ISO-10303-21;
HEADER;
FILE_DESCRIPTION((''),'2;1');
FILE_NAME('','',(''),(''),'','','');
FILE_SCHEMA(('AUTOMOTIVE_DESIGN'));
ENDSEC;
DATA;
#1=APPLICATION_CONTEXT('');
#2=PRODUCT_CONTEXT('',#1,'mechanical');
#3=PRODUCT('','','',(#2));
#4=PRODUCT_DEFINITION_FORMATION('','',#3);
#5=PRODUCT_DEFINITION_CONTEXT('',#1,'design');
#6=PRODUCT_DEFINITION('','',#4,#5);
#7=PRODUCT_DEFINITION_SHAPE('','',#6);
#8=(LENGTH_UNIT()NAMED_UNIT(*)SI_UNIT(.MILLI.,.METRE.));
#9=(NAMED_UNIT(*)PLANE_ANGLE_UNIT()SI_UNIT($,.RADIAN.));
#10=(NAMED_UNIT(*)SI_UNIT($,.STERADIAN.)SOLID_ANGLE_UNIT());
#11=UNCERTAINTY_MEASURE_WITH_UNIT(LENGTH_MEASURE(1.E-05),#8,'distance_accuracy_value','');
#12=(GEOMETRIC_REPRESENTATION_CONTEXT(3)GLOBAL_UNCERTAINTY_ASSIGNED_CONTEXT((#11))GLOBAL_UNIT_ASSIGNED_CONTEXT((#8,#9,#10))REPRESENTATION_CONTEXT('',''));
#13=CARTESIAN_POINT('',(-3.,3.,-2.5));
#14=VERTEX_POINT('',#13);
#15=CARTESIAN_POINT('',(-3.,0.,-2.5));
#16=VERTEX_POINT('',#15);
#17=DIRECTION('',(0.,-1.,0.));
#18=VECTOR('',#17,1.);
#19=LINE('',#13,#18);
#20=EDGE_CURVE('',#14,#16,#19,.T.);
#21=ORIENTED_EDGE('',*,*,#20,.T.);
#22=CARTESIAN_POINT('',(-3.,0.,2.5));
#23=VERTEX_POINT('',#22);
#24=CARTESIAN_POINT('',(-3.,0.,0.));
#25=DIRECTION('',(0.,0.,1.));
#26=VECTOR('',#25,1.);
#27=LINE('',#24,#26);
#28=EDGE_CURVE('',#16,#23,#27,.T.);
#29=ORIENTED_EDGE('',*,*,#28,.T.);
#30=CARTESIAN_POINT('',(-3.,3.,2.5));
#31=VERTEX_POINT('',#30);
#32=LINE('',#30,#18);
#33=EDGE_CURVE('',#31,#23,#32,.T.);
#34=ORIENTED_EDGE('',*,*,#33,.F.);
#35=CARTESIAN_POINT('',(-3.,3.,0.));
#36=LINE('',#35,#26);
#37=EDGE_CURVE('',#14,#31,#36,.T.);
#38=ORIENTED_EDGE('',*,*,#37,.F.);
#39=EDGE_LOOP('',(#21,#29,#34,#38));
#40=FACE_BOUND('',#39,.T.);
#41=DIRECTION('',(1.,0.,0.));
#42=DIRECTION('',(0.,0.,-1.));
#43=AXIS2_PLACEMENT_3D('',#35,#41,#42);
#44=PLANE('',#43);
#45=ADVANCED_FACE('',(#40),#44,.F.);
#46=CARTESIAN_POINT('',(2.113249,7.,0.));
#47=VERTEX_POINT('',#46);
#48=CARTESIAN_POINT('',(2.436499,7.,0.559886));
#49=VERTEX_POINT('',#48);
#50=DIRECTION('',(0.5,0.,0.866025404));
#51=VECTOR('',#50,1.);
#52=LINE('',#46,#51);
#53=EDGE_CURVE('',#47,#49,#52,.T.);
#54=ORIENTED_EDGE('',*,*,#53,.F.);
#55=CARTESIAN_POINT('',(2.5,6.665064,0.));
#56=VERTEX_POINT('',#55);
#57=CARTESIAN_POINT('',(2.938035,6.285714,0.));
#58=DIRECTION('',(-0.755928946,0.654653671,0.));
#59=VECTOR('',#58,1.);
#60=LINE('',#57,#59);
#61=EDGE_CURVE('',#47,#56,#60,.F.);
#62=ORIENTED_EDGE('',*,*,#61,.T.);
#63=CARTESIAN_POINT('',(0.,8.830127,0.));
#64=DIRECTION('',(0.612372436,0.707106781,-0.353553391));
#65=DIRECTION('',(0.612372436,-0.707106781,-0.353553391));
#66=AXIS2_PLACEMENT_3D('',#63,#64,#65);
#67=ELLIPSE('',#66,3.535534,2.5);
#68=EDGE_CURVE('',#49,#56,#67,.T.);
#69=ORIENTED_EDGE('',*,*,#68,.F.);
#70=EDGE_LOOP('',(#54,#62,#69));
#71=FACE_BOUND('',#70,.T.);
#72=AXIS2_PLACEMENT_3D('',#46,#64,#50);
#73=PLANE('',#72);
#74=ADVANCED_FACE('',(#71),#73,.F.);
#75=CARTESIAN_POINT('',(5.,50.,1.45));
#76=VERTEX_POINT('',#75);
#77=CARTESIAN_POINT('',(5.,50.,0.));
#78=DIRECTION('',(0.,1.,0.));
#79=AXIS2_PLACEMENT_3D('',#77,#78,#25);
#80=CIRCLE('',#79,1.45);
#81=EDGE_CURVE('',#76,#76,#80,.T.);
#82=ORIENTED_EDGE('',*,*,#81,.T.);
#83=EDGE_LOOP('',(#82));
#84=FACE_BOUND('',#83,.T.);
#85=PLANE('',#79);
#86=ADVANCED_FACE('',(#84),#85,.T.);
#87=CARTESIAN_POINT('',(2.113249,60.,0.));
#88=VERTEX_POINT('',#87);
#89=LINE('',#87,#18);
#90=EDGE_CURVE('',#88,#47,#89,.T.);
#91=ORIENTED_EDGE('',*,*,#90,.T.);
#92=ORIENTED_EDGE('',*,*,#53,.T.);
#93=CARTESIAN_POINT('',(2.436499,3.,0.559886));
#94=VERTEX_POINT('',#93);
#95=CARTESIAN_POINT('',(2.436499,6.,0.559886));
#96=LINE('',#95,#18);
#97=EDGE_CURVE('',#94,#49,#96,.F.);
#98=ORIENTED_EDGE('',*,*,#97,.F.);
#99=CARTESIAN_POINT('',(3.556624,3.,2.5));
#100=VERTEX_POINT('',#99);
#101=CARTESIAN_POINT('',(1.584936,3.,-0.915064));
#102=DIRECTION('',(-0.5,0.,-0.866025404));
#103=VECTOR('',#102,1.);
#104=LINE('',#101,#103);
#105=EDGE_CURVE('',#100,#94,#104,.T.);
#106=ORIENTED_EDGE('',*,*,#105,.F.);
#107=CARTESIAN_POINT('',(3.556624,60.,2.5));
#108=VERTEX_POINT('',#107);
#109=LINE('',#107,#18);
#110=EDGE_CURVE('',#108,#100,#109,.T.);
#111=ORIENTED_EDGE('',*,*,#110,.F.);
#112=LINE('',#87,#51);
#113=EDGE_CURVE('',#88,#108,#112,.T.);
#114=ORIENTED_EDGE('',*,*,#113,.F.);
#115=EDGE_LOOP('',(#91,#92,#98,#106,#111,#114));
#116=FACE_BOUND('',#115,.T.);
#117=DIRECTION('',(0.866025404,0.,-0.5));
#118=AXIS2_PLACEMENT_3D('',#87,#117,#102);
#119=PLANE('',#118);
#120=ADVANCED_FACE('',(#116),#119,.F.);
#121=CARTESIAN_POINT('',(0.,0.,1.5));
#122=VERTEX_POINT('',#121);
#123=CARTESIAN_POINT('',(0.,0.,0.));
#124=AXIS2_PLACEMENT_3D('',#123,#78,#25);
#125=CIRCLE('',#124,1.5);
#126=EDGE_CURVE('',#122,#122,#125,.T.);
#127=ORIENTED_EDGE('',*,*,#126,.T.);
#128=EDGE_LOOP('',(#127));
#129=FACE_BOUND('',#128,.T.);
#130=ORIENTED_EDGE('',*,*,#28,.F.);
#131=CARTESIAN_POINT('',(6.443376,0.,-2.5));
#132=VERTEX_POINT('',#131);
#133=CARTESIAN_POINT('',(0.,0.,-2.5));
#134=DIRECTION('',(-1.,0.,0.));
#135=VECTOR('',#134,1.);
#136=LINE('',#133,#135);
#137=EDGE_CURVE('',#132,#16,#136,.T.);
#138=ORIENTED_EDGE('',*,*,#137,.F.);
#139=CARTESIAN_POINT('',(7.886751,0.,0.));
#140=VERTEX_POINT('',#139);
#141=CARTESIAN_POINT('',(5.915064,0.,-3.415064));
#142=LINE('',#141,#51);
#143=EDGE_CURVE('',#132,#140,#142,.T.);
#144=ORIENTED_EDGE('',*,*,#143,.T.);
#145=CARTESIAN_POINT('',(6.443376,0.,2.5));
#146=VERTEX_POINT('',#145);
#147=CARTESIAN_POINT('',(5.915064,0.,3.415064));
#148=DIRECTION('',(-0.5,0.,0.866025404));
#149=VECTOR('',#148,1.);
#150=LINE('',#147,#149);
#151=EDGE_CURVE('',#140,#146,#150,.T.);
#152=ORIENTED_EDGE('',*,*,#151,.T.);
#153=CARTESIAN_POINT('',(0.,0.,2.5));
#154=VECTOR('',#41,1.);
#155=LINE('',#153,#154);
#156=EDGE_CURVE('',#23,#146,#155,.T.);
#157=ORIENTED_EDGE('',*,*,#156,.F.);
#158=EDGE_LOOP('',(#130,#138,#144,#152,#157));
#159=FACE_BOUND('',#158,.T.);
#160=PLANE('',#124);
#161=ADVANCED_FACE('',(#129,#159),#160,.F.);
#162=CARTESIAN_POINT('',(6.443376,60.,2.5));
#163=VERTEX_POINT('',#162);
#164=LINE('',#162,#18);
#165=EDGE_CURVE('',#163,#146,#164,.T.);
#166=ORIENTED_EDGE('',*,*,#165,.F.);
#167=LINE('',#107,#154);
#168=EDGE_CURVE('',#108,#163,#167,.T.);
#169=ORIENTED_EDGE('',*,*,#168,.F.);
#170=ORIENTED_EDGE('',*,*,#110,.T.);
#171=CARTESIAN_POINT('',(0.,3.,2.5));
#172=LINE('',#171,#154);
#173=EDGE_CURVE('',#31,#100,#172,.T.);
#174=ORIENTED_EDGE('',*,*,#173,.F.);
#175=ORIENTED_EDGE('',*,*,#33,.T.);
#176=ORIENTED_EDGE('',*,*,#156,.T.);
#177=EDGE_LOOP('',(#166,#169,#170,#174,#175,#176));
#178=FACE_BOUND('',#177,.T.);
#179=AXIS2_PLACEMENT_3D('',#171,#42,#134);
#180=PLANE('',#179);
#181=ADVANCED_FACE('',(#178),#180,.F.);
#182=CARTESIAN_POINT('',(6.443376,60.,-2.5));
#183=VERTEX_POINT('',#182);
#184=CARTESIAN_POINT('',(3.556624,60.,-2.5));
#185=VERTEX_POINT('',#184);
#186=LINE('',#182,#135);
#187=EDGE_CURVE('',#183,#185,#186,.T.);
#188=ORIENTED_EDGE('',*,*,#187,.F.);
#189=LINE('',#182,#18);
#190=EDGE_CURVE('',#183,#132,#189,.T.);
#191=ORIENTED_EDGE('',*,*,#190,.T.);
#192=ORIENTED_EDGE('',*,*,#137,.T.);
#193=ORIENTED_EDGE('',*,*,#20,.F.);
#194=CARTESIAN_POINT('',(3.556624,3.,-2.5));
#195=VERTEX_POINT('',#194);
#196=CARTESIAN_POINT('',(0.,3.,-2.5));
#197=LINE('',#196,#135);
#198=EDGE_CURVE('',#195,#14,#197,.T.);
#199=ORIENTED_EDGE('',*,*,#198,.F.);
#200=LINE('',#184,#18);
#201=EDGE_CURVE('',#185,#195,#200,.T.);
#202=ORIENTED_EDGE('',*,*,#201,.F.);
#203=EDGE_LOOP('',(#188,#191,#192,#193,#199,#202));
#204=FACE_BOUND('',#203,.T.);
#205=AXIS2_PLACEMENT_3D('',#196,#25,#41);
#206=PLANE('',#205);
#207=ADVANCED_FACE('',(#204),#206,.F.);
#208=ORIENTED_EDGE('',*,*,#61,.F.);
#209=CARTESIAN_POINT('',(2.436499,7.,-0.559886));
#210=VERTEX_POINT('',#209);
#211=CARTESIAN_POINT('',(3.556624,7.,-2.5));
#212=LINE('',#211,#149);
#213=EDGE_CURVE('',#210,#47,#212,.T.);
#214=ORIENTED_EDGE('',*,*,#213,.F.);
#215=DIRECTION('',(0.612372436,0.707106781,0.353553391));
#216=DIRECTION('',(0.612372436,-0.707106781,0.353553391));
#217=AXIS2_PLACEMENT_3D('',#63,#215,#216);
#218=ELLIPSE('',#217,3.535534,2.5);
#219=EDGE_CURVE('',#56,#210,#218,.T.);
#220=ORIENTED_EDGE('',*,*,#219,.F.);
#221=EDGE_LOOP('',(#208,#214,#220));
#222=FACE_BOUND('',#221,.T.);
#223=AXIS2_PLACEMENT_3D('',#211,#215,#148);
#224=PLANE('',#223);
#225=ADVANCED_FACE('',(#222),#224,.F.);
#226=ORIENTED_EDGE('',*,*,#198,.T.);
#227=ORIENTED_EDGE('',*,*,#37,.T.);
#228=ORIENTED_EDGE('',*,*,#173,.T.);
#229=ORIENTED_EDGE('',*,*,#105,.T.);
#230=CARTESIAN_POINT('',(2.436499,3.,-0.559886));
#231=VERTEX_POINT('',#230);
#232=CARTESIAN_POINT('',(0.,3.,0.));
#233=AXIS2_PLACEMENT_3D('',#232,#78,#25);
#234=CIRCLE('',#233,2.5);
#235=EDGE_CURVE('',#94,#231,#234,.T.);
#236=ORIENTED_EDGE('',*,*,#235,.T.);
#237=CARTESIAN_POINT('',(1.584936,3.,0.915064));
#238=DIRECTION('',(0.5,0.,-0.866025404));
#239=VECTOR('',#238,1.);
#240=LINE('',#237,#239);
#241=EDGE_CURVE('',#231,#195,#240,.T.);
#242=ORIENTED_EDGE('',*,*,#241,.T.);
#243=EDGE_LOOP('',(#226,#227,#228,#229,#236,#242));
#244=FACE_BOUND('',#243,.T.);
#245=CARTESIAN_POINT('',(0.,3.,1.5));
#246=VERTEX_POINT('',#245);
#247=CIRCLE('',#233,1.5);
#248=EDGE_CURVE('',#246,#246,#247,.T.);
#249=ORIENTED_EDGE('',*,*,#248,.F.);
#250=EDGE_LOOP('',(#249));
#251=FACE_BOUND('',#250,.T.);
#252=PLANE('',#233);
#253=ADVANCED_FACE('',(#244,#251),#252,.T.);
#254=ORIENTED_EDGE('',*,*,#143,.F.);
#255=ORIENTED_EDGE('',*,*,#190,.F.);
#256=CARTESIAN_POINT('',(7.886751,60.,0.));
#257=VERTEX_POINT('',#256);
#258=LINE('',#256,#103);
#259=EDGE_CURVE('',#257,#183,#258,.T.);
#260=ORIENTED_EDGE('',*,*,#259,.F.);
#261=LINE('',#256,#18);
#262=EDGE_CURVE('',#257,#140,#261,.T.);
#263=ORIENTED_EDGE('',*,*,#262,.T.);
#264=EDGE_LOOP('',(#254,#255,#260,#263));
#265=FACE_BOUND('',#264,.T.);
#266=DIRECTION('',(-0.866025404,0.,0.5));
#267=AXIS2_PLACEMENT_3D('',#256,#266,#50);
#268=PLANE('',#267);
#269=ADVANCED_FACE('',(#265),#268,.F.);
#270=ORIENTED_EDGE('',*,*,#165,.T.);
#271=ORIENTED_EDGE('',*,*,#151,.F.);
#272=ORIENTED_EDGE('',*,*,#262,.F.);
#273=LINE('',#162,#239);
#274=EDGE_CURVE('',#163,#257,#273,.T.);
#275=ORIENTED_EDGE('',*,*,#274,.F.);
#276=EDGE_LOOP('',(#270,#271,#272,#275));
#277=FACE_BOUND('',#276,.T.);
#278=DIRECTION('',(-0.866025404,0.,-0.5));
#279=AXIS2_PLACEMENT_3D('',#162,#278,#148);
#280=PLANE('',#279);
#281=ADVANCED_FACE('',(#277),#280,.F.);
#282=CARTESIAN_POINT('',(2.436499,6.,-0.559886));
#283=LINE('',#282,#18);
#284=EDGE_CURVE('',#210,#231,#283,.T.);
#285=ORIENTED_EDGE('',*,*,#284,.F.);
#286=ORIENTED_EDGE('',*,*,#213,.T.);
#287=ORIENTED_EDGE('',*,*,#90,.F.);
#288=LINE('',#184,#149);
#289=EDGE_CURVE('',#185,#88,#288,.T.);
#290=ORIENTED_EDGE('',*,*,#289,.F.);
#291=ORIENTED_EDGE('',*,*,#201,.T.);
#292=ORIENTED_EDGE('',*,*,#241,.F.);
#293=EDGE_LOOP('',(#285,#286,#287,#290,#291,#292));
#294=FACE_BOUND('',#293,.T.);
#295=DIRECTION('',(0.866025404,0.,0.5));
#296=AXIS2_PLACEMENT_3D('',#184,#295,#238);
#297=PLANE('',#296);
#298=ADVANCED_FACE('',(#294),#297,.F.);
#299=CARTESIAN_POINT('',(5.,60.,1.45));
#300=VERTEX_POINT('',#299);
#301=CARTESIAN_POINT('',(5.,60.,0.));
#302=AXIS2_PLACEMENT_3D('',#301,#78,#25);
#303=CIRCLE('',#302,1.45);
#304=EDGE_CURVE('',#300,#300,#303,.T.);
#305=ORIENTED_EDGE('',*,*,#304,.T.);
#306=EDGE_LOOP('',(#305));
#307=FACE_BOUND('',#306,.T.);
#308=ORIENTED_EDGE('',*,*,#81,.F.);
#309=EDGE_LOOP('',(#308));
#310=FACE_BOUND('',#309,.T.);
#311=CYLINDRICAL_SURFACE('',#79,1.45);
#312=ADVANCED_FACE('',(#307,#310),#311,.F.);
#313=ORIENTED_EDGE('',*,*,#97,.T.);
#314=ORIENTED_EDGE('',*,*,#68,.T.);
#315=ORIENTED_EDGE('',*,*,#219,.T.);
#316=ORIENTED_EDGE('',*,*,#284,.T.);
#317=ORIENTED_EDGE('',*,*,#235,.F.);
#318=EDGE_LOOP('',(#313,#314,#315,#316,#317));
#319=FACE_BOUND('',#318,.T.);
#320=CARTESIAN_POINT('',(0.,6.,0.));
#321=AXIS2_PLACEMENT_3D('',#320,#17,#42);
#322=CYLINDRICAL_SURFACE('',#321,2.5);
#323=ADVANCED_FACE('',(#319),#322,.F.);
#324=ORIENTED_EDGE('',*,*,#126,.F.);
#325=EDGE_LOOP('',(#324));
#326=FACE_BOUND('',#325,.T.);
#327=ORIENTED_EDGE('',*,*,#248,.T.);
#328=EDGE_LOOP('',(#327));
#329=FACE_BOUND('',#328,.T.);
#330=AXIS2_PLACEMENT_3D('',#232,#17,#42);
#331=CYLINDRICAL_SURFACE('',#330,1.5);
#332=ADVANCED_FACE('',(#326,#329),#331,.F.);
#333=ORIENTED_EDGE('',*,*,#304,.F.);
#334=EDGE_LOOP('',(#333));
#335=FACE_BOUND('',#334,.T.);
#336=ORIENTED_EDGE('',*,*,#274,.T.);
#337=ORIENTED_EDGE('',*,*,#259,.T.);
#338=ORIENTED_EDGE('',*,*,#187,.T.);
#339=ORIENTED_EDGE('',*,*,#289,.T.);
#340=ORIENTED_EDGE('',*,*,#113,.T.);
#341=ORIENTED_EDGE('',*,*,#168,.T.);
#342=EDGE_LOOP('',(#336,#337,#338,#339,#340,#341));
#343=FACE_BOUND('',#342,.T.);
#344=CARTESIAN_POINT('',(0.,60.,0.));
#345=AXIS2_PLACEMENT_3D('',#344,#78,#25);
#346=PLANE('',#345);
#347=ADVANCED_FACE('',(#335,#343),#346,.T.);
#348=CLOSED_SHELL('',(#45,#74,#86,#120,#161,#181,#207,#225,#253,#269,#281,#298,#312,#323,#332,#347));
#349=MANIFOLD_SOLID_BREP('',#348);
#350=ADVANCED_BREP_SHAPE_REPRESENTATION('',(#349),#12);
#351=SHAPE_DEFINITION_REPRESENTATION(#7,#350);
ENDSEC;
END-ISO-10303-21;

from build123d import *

# Parameters (mm, degrees)
SKETCH2_R           = 1.5
BOSS_EXTRUDE1_DEPTH = 3
BOSS_EXTRUDE2_DEPTH = 60
SKETCH3_R           = 1.45
CUT_EXTRUDE1_DEPTH  = 10
CUT_EXTRUDE2_DEPTH  = 8
SKETCH5_R           = 2.5
CUT_EXTRUDE3_DEPTH  = 3
CHAMFER1_SIZE       = 1


with BuildPart() as part:
    # Sketch2 → Boss-Extrude1 (new body)
    # profile 1 of 3: a face of its own
    with BuildSketch(Plane(origin=(0, 0, 0), x_dir=(1, 0, 0), z_dir=(0, 1, 0))):
        Polygon((2.113248654, 0), (3.556624327, 2.5), (-3, 2.5), (-3, -2.5), (3.556624327, -2.5), align=None)
        with Locations(Location((0, 0, 0), (0, 0, 270))):
            Circle(SKETCH2_R, mode=Mode.SUBTRACT)
    # profile 2 of 3: a face of its own
    with BuildSketch(Plane(origin=(0, 0, 0), x_dir=(1, 0, 0), z_dir=(0, 1, 0))):
        Polygon((8, -2.5), (8, 2.5), (6.443375673, 2.5), (7.886751346, 0), (6.443375673, -2.5), align=None)
    # profile 3 of 3: a face of its own
    with BuildSketch(Plane(origin=(0, 0, 0), x_dir=(1, 0, 0), z_dir=(0, 1, 0))):
        Polygon((7.886751346, 0), (6.443375673, 2.5), (3.556624327, 2.5), (2.113248654, 0), (3.556624327, -2.5), (6.443375673, -2.5), align=None)
    extrude(amount=BOSS_EXTRUDE1_DEPTH)

    # Sketch2<3> → Boss-Extrude2 (add)
    with BuildSketch(Plane(origin=(0, 0, 0), x_dir=(1, 0, 0), z_dir=(0, 1, 0))):
        Polygon((3.556624327, 2.5), (2.113248654, 0), (3.556624327, -2.5), (6.443375673, -2.5), (7.886751346, 0), (6.443375673, 2.5), align=None)
    extrude(amount=BOSS_EXTRUDE2_DEPTH)

    # Sketch3 → Cut-Extrude1 (cut)
    with BuildSketch(Plane(origin=(0, 60, 0), x_dir=(1, 0, 0), z_dir=(0, 1, 0))):
        with Locations(Location((5, 0, 0), (0, 0, 270))):
            Circle(SKETCH3_R)
    extrude(amount=-CUT_EXTRUDE1_DEPTH, mode=Mode.SUBTRACT)

    # Sketch4 → Cut-Extrude2 (cut)
    with BuildSketch(Plane(origin=(0, 3, 0), x_dir=(1, 0, 0), z_dir=(0, 1, 0))):
        Polygon((6.443375673, 2.5), (8, 2.5), (8, -2.5), (6.443375673, -2.5), (7.886751346, 0), align=None)
    extrude(amount=-CUT_EXTRUDE2_DEPTH, mode=Mode.SUBTRACT)

    # Sketch5 → Cut-Extrude3 (cut)
    with BuildSketch(Plane(origin=(0, 3, 0), x_dir=(1, 0, 0), z_dir=(0, 1, 0))):
        Circle(SKETCH5_R)
    extrude(amount=CUT_EXTRUDE3_DEPTH, mode=Mode.SUBTRACT)

    # Chamfer1
    # the kernel refuses this chamfer: 1 mm, written as the material it takes off along each edge
    with BuildSketch(Plane(origin=(0.82740716, 6, -2.227142798), x_dir=(0.8656979742248804, -0.027495876610586487, -0.49981095845564805), z_dir=(0.4999999999999997, 0, 0.8660254037844388))) as chamfer1_piece_1_section:
        Polygon((CHAMFER1_SIZE * 0.999621916911, CHAMFER1_SIZE * 0.0274958766106), (-CHAMFER1_SIZE * 0.0274958766106, CHAMFER1_SIZE * 0.999621916911), (0, 0), align=None)
    chamfer1_piece_1 = extrude(amount=5.789866745, mode=Mode.PRIVATE)
    chamfer1_piece_1 = chamfer1_piece_1 & Plane(origin=(0, 6.406914482, 0), x_dir=(1, 0, 0), z_dir=(0, -1, 0)) * Cylinder(2.5, 16, mode=Mode.PRIVATE)
    add(chamfer1_piece_1, mode=Mode.SUBTRACT)
    with BuildSketch(Plane(origin=(3.722340533, 6, -2.787028888), x_dir=(0.8656979742248803, -0.027495876610586504, 0.4998109584556485), z_dir=(-0.5000000000000001, 0, 0.8660254037844386))) as chamfer1_piece_2_section:
        Polygon((CHAMFER1_SIZE * 0.999621916911, CHAMFER1_SIZE * 0.0274958766106), (-CHAMFER1_SIZE * 0.0274958766106, CHAMFER1_SIZE * 0.999621916911), (0, 0), align=None)
    chamfer1_piece_2 = extrude(amount=5.789866745, mode=Mode.PRIVATE)
    chamfer1_piece_2 = chamfer1_piece_2 & Plane(origin=(0, 6.406914482, 0), x_dir=(1, 0, 0), z_dir=(0, -1, 0)) * Cylinder(2.5, 16, mode=Mode.PRIVATE)
    add(chamfer1_piece_2, mode=Mode.SUBTRACT)


solid = part.part
